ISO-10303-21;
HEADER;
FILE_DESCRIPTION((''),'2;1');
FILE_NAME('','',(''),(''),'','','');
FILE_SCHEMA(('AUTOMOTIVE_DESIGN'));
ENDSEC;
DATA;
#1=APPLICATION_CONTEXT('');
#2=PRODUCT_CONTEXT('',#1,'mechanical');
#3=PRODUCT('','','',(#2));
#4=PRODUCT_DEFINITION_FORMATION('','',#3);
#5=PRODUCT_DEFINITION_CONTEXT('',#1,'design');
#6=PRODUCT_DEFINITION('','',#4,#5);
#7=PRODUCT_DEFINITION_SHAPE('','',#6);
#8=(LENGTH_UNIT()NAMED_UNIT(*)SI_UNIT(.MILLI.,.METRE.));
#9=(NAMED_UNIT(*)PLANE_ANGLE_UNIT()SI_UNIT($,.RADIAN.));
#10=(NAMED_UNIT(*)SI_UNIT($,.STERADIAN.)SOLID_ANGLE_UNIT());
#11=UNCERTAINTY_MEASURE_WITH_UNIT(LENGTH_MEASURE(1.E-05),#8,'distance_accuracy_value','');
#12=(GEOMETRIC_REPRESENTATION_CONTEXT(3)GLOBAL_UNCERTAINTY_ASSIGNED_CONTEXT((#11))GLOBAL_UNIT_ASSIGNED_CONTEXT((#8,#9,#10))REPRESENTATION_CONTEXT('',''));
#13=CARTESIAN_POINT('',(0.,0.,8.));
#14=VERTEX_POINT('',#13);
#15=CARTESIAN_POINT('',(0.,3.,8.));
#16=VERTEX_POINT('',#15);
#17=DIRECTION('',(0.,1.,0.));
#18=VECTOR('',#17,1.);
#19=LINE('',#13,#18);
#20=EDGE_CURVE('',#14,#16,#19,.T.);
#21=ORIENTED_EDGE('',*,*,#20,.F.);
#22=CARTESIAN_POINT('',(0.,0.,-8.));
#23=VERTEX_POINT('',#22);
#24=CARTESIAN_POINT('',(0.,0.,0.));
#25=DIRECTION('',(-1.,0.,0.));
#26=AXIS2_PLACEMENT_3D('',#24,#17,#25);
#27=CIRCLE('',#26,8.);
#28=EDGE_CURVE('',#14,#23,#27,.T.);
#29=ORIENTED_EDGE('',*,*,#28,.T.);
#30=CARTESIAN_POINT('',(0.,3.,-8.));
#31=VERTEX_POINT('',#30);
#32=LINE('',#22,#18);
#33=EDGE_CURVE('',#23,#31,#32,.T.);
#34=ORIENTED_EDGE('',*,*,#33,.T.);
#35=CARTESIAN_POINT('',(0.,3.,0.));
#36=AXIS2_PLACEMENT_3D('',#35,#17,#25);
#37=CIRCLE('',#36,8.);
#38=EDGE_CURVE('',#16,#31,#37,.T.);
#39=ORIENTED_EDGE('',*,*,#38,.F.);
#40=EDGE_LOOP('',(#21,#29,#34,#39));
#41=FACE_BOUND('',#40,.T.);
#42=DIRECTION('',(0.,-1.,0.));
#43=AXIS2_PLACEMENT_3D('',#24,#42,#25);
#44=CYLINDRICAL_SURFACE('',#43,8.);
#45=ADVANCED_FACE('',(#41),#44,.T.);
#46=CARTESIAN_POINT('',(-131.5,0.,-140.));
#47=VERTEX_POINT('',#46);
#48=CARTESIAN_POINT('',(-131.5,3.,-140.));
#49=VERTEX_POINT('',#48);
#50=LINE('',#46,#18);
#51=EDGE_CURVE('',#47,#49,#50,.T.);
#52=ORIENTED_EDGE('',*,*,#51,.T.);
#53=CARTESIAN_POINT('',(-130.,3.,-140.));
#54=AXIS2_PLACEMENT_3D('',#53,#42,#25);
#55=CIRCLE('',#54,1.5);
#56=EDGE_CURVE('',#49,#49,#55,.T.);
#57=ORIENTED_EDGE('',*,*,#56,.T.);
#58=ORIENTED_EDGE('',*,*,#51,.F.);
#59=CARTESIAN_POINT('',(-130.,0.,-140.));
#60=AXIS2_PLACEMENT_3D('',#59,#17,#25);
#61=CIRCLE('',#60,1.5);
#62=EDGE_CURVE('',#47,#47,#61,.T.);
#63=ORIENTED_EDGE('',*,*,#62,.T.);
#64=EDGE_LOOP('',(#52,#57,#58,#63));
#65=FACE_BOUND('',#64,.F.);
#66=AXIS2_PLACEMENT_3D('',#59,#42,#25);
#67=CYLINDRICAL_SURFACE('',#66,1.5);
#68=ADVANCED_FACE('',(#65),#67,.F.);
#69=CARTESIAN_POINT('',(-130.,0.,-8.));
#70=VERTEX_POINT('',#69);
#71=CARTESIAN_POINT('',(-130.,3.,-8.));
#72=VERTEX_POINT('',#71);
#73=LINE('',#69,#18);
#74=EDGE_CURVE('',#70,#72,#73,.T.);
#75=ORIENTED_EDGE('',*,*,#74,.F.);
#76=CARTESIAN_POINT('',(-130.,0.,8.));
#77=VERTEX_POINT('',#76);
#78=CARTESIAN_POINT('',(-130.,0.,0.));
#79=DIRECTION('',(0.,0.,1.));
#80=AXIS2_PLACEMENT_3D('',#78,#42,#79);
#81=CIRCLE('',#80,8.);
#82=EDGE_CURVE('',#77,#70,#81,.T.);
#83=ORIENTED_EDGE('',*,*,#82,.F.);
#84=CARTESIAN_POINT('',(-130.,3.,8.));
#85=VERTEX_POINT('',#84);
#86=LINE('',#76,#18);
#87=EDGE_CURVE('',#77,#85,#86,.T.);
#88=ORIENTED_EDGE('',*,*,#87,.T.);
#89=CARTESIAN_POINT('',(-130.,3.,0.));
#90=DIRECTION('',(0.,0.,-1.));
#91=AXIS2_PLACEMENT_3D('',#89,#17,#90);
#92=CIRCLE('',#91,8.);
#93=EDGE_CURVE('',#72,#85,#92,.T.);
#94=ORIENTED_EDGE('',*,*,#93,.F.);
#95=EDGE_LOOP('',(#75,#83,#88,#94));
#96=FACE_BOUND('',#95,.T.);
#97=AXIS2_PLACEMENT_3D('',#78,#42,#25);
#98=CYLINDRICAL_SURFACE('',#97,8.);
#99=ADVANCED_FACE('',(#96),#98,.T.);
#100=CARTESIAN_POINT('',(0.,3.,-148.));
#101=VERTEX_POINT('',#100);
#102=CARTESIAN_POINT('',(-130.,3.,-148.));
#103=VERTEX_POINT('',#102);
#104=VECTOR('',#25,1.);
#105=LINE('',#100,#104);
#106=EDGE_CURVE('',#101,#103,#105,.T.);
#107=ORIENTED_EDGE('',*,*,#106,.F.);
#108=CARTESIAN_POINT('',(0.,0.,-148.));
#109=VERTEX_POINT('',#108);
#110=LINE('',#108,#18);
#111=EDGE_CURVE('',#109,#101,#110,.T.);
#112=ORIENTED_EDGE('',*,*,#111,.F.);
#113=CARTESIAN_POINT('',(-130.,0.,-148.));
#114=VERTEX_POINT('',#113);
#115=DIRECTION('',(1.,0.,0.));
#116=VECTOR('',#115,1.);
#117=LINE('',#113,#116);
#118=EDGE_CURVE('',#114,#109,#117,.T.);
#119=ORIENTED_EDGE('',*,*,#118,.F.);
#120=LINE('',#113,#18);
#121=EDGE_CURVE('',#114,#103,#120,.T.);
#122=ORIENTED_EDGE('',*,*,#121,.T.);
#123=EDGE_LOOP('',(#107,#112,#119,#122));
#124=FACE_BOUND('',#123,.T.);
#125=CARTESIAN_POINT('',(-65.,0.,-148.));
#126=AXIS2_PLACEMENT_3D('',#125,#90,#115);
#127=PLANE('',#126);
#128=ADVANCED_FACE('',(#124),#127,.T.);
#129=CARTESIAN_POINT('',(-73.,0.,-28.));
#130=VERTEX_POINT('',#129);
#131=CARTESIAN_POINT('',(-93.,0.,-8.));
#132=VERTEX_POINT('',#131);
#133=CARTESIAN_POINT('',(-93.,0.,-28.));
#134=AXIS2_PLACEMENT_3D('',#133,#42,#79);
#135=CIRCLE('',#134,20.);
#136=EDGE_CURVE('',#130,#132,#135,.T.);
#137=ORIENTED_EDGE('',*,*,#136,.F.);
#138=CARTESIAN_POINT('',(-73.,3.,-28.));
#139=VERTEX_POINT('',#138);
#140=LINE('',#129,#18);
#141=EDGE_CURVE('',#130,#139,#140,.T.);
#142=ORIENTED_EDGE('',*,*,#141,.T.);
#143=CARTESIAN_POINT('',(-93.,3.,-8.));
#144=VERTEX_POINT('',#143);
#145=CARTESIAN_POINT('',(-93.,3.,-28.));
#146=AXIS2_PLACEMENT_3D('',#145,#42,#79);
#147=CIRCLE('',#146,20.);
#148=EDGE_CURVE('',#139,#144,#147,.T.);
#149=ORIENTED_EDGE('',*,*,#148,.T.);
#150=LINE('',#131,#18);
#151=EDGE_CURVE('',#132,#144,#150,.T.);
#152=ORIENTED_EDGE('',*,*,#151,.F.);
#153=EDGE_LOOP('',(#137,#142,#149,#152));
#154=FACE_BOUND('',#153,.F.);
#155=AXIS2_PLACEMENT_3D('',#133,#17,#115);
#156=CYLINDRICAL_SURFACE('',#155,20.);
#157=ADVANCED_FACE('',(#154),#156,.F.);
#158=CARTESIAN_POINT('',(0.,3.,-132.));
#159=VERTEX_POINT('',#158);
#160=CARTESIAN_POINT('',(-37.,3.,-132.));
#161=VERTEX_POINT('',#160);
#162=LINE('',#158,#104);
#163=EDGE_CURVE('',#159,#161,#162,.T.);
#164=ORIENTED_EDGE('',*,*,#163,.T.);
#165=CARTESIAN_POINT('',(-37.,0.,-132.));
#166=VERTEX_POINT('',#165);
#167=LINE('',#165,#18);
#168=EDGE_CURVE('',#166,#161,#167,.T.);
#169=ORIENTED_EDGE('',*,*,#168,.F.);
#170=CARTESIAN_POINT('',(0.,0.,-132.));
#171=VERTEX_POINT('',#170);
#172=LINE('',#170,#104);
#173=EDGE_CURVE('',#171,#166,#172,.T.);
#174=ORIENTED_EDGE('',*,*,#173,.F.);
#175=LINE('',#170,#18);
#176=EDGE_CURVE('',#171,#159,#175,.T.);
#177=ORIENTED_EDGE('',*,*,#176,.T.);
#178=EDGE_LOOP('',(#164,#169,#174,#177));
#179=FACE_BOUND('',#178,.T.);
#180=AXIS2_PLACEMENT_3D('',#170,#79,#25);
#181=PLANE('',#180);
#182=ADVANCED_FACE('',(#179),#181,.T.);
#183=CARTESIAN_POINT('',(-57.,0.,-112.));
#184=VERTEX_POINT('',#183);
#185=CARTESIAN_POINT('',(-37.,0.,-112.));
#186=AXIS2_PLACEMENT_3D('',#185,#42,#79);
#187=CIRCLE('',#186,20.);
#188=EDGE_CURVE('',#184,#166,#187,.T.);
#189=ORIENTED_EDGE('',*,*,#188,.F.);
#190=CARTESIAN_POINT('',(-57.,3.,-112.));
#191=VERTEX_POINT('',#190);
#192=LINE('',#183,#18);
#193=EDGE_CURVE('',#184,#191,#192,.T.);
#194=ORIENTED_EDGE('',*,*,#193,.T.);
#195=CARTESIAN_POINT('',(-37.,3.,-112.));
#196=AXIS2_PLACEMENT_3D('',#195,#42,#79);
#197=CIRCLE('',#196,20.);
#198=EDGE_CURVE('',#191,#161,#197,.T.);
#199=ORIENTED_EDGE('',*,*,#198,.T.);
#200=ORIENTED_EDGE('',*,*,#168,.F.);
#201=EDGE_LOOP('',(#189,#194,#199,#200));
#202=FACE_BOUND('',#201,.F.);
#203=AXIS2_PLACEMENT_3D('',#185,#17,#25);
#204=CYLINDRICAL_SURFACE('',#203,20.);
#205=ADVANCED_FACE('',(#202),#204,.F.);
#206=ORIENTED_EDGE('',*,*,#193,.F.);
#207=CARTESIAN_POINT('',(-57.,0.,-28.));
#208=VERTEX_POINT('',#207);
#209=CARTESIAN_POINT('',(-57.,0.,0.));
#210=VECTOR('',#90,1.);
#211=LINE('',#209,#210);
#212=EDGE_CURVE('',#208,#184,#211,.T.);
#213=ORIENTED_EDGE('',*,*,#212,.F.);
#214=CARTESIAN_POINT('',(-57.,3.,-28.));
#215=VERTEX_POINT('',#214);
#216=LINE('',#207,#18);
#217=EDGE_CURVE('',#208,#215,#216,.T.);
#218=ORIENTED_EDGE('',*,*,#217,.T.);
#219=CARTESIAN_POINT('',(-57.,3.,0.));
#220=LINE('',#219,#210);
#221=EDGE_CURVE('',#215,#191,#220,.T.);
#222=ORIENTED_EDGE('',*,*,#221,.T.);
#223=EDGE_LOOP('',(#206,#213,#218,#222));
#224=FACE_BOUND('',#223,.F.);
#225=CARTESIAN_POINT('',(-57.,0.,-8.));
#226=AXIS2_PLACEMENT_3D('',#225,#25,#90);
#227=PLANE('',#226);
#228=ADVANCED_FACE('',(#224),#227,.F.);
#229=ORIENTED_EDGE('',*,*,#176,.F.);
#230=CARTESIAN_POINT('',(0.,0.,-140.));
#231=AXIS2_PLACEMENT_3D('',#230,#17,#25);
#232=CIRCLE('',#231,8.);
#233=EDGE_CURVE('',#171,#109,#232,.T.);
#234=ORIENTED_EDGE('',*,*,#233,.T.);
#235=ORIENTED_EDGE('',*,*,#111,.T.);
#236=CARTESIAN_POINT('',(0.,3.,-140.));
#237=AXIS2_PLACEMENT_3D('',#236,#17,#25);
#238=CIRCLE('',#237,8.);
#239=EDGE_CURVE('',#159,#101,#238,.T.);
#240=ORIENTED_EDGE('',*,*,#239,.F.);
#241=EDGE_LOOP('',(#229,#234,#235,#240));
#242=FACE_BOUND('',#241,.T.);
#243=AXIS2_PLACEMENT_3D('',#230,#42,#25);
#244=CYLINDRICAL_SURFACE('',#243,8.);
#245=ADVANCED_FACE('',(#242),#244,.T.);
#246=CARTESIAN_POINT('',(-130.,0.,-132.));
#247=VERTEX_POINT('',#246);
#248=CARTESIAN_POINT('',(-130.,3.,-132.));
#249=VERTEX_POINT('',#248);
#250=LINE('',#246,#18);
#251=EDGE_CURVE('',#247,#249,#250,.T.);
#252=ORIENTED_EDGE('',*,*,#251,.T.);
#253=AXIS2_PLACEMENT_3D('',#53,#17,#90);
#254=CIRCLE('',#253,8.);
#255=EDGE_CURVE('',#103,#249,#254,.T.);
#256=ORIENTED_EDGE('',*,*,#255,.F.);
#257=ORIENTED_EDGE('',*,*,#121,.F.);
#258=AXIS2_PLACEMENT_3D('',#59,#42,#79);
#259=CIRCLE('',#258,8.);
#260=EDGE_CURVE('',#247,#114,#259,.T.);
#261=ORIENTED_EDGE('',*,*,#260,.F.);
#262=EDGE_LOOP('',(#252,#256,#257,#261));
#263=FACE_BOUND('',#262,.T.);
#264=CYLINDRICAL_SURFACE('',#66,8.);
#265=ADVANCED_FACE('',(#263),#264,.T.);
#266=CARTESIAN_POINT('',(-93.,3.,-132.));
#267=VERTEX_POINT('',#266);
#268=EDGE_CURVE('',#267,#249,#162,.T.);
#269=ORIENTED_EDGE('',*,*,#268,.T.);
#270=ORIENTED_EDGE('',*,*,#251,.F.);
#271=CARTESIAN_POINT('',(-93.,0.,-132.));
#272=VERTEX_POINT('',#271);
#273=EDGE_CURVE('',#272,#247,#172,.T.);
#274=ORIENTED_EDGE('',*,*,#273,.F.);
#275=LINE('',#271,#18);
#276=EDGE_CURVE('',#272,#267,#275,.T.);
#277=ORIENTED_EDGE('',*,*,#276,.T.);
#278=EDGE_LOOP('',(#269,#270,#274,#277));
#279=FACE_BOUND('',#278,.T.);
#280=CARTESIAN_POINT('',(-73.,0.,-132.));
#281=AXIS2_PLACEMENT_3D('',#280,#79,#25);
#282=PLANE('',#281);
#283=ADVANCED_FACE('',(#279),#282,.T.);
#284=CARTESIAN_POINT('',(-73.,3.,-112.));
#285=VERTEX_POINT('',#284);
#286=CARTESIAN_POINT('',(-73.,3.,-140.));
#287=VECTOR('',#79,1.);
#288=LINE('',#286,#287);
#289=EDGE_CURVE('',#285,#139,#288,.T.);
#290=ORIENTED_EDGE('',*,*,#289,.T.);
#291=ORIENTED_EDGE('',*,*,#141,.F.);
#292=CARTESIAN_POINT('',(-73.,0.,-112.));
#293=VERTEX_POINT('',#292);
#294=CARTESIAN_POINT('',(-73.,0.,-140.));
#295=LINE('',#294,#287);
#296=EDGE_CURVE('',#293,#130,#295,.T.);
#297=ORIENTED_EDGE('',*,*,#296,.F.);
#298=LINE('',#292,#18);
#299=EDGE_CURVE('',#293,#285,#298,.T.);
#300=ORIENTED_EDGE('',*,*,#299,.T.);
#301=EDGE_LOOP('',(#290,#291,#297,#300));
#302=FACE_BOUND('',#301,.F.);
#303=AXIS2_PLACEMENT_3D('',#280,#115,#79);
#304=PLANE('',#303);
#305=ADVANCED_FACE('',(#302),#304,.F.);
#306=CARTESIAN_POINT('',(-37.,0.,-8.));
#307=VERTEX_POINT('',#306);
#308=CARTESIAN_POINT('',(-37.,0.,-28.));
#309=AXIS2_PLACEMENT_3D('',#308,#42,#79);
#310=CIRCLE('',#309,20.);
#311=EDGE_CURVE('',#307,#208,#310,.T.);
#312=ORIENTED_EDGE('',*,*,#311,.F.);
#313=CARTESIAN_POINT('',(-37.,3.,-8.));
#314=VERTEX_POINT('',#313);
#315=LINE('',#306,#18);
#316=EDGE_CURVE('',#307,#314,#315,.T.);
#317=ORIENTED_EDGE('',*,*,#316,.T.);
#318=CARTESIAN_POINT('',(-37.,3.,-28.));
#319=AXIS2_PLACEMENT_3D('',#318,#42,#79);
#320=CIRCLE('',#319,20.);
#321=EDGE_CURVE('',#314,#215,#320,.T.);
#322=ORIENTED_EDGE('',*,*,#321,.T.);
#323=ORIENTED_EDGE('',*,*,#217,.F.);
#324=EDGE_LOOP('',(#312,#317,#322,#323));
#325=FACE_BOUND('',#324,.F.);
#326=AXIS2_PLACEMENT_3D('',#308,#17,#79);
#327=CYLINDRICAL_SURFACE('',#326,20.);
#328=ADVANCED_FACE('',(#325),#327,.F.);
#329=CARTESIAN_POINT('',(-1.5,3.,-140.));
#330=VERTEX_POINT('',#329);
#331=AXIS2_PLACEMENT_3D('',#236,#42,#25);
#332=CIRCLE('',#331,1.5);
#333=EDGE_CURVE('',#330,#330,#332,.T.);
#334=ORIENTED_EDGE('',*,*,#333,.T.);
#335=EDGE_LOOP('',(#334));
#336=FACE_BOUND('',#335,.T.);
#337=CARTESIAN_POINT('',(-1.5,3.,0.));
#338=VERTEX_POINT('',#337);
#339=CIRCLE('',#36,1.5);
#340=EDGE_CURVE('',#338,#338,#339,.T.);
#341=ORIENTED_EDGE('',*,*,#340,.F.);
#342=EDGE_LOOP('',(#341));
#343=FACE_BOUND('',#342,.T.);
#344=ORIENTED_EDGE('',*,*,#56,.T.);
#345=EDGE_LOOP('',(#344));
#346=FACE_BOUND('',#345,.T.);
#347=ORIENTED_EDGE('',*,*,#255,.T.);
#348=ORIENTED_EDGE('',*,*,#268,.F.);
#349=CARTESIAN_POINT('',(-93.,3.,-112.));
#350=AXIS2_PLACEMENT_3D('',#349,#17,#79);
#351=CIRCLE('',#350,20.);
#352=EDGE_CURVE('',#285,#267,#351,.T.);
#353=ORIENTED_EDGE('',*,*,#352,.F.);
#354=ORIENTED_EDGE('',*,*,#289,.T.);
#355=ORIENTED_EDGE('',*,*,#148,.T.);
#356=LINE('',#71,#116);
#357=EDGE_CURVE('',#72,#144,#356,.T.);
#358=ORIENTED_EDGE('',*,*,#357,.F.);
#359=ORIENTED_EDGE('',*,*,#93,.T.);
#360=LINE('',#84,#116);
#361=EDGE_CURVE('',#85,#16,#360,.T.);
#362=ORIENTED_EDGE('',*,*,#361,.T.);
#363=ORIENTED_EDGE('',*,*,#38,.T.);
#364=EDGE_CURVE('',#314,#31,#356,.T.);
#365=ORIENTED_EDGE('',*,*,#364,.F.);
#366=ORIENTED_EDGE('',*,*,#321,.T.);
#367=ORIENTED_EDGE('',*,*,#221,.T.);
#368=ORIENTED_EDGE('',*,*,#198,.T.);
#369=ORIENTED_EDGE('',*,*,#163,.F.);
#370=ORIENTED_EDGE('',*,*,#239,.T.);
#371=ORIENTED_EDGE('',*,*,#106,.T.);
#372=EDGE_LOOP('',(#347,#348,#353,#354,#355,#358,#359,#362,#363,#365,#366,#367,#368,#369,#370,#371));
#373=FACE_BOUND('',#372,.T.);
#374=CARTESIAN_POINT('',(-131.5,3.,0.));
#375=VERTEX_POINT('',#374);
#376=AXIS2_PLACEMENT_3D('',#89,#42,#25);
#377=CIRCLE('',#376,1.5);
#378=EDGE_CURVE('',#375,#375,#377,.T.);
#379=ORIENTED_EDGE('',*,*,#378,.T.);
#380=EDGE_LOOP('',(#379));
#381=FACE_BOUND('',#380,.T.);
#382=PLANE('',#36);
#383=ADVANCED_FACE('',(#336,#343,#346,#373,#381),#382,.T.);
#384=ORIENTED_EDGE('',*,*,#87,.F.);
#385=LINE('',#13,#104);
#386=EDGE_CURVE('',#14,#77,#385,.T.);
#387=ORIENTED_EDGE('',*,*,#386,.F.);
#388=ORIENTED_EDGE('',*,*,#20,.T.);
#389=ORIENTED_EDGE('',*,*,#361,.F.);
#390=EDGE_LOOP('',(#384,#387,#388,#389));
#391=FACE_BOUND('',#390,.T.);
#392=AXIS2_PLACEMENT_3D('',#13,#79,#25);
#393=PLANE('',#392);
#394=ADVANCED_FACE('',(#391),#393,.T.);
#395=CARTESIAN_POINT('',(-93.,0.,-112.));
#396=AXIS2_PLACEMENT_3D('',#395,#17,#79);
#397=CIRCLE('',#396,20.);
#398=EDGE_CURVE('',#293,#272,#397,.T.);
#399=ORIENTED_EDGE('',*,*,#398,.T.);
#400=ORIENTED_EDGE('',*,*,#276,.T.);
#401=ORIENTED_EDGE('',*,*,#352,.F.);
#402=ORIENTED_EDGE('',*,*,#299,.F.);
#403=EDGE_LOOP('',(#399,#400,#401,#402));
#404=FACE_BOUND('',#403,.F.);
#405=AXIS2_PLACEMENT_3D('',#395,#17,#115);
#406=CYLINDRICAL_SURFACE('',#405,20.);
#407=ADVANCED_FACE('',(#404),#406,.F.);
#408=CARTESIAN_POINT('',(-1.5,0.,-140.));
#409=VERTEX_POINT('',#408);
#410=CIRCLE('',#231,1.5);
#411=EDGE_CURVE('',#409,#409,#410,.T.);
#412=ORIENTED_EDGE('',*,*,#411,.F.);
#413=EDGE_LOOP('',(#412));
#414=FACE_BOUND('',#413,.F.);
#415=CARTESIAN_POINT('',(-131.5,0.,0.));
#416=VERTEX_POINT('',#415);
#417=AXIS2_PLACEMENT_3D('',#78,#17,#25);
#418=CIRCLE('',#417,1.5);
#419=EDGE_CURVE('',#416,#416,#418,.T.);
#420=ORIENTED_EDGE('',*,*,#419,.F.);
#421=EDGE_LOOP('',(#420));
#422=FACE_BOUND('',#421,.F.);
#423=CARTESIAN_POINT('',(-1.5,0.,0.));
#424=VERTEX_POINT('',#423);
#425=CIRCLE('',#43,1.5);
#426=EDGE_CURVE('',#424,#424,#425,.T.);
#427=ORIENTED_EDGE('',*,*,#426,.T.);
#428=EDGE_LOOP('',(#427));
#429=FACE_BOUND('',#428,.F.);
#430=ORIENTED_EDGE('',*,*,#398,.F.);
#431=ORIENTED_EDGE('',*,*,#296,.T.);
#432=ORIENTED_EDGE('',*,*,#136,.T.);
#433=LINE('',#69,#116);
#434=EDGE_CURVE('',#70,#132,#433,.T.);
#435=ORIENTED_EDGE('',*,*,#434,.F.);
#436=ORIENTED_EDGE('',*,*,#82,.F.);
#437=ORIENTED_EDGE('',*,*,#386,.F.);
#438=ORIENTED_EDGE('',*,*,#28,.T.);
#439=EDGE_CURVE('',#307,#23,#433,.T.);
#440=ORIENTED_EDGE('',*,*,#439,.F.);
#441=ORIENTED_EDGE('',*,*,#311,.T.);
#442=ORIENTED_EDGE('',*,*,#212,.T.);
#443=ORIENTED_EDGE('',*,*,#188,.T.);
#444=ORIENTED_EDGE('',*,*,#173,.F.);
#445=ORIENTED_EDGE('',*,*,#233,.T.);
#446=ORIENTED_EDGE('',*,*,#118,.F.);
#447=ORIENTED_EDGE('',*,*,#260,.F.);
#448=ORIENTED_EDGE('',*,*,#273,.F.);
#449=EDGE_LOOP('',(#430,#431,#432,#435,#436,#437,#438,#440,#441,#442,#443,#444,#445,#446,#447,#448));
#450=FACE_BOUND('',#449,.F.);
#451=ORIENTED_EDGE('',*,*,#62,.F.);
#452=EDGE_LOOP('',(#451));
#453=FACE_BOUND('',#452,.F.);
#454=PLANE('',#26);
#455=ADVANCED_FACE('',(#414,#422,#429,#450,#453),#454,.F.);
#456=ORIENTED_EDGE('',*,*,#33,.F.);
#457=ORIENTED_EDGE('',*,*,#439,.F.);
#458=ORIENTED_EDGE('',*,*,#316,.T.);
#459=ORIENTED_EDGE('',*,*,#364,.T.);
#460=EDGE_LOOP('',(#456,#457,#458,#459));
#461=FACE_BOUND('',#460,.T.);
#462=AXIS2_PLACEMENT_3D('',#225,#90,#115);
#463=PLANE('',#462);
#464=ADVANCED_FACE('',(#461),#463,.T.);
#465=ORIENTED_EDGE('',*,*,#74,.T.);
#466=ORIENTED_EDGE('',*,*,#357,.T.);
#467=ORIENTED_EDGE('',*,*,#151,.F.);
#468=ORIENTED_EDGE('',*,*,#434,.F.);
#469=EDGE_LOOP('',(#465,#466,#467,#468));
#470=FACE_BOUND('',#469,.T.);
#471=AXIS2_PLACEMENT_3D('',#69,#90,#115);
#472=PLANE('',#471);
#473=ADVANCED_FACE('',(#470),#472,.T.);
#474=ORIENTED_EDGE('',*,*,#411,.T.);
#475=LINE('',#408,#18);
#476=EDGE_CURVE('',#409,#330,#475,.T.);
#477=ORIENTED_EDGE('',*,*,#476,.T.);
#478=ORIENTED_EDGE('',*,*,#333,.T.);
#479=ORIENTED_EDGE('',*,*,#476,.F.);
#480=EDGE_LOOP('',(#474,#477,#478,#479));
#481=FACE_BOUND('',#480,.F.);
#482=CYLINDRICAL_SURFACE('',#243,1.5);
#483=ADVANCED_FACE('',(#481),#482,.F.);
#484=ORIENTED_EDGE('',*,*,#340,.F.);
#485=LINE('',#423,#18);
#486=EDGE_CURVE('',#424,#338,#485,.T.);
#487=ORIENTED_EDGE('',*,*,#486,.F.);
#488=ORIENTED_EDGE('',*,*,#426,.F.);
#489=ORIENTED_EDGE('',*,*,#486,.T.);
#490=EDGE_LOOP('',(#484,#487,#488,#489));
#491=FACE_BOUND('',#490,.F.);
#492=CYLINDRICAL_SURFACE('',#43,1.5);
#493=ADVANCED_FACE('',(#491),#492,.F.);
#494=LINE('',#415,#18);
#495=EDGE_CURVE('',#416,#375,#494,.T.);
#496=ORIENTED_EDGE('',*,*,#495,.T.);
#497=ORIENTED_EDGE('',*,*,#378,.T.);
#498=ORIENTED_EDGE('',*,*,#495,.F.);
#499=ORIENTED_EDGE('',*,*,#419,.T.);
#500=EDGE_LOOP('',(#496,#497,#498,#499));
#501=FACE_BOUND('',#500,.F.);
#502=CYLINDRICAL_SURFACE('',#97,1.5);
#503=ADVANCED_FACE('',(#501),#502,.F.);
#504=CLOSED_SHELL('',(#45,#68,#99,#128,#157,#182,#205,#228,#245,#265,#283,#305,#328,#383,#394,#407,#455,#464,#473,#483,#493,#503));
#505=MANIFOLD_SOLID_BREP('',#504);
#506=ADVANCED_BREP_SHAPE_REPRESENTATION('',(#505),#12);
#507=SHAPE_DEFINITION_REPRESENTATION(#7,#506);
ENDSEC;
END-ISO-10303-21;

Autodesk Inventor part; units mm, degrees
ref_plane "YZ Plane" through (0, 0, 0) normal (1, 0, 0) x (0, 1, 0)
ref_plane "XZ Plane" through (0, 0, 0) normal (0, 1, 0) x (-1, 0, 0)
ref_plane "XY Plane" through (0, 0, 0) normal (0, 0, 1) x (1, 0, 0)
sketch "Sketch1" plane through (0, 0, 0) normal (0, 1, 0) x (-1, 0, 0)
  line L0 (0, 0) -> (130, 0)
  line L1 (130, 0) -> (130, -140)
  line L2 (130, -140) -> (0, -140)
  line L3 (0, -140) -> (0, 0)
  circle A0 centre (0, 0) radius 1.5
  circle A1 centre (130, 0) radius 1.5
  circle A2 centre (130, -140) radius 1.5
  circle A3 centre (0, -140) radius 1.5
  circle A4 centre (0, -140) radius 8
  circle A5 centre (130, -140) radius 8
  circle A6 centre (130, 0) radius 8
  circle A7 centre (0, 0) radius 8
  line L4 (130, 0) -> (0, 0) construction
  line L5 (130, -8) -> (0, -8)
  line L6 (0, 8) -> (130, 8)
  arc A8 (130, -8) -> (130, 8) centre (130, 0) ccw
  arc A9 (0, 8) -> (0, -8) centre (0, 0) ccw
  line L7 (130, -140) -> (0, -140) construction
  line L8 (130, -148) -> (0, -148)
  line L9 (0, -132) -> (130, -132)
  arc A10 (130, -148) -> (130, -132) centre (130, -140) ccw
  arc A11 (0, -132) -> (0, -148) centre (0, -140) ccw
  line L10 (65, 0) -> (65, -70)
  line L11 (65, -140) -> (65, 0) construction
  line L12 (73, -140) -> (73, 0)
  line L13 (57, 0) -> (57, -140)
  arc A12 (57, -140) -> (73, -140) centre (65, -140) ccw
  arc A13 (73, 0) -> (57, 0) centre (65, 0) ccw
  dimension "d0" = 130
  dimension "d1" = 140
  dimension "d2" = 3
  dimension "d3" = 3
  dimension "d4" = 3
  dimension "d5" = 3
  dimension "d6" = 16
  dimension "d7" = 16
  dimension "d8" = 16
  dimension "d9" = 16
  dimension "d10" = 70
  dimension "d14" = 8
extrude "Extrusion1" add sketch "Sketch1" along normal blind 3 contours A0 L3 A7 L0 | L0 A7 L3 A0 | A7 L6 A13 L0 | L0 L13 L5 A7 | A13 L0 | L0 L10 L5 L13 | A4 L2 A3 L3 | L9 L13 L2 A4 | L3 A3 L2 A4 | L5 L12 L9 L13 | L0 L12 L5 L10 | L6 A6 L0 A13 | L2 A12 L8 A4 | L9 L12 L2 L13 | L0 A6 L5 L12 | A6 L1 A1 L0 | L2 A12 | A12 L2 A5 L8 | L9 A5 L2 L12 | L0 A1 L1 A6 | A5 L2 A2 L1 | L1 A2 L2 A5
fillet "Fillet1" radius 20 4 edges at (-57, 1.5, -132) (-73, 1.5, -132) (-57, 1.5, -8) (-73, 1.5, -8)
properties part number "Handle 2"
